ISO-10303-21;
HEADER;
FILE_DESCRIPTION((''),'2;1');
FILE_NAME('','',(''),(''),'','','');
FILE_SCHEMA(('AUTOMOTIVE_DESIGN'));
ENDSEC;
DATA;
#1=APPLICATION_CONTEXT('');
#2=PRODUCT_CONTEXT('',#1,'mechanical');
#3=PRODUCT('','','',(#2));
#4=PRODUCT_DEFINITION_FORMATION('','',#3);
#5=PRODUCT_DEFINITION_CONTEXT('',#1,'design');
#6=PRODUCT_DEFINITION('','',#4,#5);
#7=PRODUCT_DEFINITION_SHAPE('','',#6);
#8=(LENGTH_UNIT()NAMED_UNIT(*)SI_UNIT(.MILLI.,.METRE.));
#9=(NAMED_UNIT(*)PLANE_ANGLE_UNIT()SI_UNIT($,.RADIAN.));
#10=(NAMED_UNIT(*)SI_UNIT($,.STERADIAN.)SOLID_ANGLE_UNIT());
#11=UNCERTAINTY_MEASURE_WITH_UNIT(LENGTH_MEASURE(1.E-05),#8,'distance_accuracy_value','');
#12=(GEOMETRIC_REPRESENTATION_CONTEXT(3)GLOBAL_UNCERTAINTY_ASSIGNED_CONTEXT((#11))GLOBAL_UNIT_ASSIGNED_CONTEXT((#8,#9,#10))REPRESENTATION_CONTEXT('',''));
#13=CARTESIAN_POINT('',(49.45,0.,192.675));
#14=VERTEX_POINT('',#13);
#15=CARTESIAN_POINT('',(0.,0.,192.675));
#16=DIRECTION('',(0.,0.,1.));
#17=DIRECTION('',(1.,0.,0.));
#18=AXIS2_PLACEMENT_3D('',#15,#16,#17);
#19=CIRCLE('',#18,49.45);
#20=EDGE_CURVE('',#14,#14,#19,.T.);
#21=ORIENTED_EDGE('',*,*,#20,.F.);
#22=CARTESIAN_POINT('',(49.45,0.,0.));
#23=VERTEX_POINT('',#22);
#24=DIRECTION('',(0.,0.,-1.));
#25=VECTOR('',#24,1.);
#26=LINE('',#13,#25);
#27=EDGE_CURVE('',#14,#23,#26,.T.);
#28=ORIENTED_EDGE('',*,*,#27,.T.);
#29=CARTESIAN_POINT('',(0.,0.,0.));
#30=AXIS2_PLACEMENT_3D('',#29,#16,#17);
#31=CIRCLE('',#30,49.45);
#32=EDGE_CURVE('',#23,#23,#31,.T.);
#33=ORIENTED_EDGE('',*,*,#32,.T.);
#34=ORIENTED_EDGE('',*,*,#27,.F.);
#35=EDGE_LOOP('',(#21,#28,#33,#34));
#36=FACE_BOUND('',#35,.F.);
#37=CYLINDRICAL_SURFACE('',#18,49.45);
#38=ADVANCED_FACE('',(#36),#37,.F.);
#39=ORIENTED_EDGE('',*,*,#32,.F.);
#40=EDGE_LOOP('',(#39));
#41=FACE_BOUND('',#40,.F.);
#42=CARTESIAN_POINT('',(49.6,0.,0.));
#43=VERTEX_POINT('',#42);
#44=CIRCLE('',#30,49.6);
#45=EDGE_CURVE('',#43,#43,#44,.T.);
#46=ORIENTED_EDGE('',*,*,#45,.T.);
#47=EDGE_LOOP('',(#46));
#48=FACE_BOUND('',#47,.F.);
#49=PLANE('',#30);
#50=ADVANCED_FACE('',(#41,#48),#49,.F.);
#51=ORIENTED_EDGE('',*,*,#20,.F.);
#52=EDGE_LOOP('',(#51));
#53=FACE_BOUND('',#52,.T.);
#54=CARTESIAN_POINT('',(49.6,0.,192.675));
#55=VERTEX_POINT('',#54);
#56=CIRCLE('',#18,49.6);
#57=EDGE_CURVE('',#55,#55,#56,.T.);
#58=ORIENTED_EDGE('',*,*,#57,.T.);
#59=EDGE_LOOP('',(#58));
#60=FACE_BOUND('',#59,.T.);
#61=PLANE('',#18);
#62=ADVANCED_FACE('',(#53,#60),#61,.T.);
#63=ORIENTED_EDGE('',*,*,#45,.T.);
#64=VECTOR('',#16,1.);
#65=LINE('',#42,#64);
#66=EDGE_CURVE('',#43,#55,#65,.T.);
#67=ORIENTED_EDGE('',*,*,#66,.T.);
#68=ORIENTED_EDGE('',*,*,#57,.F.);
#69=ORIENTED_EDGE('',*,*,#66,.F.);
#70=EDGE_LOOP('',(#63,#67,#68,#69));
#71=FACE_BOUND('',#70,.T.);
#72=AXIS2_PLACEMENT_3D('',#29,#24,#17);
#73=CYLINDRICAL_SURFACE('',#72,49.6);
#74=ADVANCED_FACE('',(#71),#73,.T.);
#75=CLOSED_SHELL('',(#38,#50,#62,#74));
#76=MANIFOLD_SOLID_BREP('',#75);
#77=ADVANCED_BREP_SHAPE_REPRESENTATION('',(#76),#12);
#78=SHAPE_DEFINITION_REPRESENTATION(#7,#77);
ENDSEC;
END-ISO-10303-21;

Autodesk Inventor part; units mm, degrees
ref_plane "YZ Plane" through (0, 0, 0) normal (1, 0, 0) x (0, 1, 0)
ref_plane "XZ Plane" through (0, 0, 0) normal (0, 1, 0) x (-1, 0, 0)
ref_plane "XY Plane" through (0, 0, 0) normal (0, 0, 1) x (1, 0, 0)
sketch "Sketch1" plane through (0, 0, 0) normal (0, 0, 1) x (1, 0, 0)
  circle A0 centre (0, 0) radius 49.6
  dimension "d0" = 99.2
extrude "Extrusion1" add sketch "Sketch1" along normal blind 192.675
sketch "Sketch2" plane through (0, 0, 192.675) normal (0, 0, 1) x (1, 0, 0)
  circle A0 centre (0, 0) radius 49.45
  dimension "d3" = 98.9
extrude "Extrusion2" cut sketch "Sketch2" against normal through all
properties part number "BNG_REV_00_7"
